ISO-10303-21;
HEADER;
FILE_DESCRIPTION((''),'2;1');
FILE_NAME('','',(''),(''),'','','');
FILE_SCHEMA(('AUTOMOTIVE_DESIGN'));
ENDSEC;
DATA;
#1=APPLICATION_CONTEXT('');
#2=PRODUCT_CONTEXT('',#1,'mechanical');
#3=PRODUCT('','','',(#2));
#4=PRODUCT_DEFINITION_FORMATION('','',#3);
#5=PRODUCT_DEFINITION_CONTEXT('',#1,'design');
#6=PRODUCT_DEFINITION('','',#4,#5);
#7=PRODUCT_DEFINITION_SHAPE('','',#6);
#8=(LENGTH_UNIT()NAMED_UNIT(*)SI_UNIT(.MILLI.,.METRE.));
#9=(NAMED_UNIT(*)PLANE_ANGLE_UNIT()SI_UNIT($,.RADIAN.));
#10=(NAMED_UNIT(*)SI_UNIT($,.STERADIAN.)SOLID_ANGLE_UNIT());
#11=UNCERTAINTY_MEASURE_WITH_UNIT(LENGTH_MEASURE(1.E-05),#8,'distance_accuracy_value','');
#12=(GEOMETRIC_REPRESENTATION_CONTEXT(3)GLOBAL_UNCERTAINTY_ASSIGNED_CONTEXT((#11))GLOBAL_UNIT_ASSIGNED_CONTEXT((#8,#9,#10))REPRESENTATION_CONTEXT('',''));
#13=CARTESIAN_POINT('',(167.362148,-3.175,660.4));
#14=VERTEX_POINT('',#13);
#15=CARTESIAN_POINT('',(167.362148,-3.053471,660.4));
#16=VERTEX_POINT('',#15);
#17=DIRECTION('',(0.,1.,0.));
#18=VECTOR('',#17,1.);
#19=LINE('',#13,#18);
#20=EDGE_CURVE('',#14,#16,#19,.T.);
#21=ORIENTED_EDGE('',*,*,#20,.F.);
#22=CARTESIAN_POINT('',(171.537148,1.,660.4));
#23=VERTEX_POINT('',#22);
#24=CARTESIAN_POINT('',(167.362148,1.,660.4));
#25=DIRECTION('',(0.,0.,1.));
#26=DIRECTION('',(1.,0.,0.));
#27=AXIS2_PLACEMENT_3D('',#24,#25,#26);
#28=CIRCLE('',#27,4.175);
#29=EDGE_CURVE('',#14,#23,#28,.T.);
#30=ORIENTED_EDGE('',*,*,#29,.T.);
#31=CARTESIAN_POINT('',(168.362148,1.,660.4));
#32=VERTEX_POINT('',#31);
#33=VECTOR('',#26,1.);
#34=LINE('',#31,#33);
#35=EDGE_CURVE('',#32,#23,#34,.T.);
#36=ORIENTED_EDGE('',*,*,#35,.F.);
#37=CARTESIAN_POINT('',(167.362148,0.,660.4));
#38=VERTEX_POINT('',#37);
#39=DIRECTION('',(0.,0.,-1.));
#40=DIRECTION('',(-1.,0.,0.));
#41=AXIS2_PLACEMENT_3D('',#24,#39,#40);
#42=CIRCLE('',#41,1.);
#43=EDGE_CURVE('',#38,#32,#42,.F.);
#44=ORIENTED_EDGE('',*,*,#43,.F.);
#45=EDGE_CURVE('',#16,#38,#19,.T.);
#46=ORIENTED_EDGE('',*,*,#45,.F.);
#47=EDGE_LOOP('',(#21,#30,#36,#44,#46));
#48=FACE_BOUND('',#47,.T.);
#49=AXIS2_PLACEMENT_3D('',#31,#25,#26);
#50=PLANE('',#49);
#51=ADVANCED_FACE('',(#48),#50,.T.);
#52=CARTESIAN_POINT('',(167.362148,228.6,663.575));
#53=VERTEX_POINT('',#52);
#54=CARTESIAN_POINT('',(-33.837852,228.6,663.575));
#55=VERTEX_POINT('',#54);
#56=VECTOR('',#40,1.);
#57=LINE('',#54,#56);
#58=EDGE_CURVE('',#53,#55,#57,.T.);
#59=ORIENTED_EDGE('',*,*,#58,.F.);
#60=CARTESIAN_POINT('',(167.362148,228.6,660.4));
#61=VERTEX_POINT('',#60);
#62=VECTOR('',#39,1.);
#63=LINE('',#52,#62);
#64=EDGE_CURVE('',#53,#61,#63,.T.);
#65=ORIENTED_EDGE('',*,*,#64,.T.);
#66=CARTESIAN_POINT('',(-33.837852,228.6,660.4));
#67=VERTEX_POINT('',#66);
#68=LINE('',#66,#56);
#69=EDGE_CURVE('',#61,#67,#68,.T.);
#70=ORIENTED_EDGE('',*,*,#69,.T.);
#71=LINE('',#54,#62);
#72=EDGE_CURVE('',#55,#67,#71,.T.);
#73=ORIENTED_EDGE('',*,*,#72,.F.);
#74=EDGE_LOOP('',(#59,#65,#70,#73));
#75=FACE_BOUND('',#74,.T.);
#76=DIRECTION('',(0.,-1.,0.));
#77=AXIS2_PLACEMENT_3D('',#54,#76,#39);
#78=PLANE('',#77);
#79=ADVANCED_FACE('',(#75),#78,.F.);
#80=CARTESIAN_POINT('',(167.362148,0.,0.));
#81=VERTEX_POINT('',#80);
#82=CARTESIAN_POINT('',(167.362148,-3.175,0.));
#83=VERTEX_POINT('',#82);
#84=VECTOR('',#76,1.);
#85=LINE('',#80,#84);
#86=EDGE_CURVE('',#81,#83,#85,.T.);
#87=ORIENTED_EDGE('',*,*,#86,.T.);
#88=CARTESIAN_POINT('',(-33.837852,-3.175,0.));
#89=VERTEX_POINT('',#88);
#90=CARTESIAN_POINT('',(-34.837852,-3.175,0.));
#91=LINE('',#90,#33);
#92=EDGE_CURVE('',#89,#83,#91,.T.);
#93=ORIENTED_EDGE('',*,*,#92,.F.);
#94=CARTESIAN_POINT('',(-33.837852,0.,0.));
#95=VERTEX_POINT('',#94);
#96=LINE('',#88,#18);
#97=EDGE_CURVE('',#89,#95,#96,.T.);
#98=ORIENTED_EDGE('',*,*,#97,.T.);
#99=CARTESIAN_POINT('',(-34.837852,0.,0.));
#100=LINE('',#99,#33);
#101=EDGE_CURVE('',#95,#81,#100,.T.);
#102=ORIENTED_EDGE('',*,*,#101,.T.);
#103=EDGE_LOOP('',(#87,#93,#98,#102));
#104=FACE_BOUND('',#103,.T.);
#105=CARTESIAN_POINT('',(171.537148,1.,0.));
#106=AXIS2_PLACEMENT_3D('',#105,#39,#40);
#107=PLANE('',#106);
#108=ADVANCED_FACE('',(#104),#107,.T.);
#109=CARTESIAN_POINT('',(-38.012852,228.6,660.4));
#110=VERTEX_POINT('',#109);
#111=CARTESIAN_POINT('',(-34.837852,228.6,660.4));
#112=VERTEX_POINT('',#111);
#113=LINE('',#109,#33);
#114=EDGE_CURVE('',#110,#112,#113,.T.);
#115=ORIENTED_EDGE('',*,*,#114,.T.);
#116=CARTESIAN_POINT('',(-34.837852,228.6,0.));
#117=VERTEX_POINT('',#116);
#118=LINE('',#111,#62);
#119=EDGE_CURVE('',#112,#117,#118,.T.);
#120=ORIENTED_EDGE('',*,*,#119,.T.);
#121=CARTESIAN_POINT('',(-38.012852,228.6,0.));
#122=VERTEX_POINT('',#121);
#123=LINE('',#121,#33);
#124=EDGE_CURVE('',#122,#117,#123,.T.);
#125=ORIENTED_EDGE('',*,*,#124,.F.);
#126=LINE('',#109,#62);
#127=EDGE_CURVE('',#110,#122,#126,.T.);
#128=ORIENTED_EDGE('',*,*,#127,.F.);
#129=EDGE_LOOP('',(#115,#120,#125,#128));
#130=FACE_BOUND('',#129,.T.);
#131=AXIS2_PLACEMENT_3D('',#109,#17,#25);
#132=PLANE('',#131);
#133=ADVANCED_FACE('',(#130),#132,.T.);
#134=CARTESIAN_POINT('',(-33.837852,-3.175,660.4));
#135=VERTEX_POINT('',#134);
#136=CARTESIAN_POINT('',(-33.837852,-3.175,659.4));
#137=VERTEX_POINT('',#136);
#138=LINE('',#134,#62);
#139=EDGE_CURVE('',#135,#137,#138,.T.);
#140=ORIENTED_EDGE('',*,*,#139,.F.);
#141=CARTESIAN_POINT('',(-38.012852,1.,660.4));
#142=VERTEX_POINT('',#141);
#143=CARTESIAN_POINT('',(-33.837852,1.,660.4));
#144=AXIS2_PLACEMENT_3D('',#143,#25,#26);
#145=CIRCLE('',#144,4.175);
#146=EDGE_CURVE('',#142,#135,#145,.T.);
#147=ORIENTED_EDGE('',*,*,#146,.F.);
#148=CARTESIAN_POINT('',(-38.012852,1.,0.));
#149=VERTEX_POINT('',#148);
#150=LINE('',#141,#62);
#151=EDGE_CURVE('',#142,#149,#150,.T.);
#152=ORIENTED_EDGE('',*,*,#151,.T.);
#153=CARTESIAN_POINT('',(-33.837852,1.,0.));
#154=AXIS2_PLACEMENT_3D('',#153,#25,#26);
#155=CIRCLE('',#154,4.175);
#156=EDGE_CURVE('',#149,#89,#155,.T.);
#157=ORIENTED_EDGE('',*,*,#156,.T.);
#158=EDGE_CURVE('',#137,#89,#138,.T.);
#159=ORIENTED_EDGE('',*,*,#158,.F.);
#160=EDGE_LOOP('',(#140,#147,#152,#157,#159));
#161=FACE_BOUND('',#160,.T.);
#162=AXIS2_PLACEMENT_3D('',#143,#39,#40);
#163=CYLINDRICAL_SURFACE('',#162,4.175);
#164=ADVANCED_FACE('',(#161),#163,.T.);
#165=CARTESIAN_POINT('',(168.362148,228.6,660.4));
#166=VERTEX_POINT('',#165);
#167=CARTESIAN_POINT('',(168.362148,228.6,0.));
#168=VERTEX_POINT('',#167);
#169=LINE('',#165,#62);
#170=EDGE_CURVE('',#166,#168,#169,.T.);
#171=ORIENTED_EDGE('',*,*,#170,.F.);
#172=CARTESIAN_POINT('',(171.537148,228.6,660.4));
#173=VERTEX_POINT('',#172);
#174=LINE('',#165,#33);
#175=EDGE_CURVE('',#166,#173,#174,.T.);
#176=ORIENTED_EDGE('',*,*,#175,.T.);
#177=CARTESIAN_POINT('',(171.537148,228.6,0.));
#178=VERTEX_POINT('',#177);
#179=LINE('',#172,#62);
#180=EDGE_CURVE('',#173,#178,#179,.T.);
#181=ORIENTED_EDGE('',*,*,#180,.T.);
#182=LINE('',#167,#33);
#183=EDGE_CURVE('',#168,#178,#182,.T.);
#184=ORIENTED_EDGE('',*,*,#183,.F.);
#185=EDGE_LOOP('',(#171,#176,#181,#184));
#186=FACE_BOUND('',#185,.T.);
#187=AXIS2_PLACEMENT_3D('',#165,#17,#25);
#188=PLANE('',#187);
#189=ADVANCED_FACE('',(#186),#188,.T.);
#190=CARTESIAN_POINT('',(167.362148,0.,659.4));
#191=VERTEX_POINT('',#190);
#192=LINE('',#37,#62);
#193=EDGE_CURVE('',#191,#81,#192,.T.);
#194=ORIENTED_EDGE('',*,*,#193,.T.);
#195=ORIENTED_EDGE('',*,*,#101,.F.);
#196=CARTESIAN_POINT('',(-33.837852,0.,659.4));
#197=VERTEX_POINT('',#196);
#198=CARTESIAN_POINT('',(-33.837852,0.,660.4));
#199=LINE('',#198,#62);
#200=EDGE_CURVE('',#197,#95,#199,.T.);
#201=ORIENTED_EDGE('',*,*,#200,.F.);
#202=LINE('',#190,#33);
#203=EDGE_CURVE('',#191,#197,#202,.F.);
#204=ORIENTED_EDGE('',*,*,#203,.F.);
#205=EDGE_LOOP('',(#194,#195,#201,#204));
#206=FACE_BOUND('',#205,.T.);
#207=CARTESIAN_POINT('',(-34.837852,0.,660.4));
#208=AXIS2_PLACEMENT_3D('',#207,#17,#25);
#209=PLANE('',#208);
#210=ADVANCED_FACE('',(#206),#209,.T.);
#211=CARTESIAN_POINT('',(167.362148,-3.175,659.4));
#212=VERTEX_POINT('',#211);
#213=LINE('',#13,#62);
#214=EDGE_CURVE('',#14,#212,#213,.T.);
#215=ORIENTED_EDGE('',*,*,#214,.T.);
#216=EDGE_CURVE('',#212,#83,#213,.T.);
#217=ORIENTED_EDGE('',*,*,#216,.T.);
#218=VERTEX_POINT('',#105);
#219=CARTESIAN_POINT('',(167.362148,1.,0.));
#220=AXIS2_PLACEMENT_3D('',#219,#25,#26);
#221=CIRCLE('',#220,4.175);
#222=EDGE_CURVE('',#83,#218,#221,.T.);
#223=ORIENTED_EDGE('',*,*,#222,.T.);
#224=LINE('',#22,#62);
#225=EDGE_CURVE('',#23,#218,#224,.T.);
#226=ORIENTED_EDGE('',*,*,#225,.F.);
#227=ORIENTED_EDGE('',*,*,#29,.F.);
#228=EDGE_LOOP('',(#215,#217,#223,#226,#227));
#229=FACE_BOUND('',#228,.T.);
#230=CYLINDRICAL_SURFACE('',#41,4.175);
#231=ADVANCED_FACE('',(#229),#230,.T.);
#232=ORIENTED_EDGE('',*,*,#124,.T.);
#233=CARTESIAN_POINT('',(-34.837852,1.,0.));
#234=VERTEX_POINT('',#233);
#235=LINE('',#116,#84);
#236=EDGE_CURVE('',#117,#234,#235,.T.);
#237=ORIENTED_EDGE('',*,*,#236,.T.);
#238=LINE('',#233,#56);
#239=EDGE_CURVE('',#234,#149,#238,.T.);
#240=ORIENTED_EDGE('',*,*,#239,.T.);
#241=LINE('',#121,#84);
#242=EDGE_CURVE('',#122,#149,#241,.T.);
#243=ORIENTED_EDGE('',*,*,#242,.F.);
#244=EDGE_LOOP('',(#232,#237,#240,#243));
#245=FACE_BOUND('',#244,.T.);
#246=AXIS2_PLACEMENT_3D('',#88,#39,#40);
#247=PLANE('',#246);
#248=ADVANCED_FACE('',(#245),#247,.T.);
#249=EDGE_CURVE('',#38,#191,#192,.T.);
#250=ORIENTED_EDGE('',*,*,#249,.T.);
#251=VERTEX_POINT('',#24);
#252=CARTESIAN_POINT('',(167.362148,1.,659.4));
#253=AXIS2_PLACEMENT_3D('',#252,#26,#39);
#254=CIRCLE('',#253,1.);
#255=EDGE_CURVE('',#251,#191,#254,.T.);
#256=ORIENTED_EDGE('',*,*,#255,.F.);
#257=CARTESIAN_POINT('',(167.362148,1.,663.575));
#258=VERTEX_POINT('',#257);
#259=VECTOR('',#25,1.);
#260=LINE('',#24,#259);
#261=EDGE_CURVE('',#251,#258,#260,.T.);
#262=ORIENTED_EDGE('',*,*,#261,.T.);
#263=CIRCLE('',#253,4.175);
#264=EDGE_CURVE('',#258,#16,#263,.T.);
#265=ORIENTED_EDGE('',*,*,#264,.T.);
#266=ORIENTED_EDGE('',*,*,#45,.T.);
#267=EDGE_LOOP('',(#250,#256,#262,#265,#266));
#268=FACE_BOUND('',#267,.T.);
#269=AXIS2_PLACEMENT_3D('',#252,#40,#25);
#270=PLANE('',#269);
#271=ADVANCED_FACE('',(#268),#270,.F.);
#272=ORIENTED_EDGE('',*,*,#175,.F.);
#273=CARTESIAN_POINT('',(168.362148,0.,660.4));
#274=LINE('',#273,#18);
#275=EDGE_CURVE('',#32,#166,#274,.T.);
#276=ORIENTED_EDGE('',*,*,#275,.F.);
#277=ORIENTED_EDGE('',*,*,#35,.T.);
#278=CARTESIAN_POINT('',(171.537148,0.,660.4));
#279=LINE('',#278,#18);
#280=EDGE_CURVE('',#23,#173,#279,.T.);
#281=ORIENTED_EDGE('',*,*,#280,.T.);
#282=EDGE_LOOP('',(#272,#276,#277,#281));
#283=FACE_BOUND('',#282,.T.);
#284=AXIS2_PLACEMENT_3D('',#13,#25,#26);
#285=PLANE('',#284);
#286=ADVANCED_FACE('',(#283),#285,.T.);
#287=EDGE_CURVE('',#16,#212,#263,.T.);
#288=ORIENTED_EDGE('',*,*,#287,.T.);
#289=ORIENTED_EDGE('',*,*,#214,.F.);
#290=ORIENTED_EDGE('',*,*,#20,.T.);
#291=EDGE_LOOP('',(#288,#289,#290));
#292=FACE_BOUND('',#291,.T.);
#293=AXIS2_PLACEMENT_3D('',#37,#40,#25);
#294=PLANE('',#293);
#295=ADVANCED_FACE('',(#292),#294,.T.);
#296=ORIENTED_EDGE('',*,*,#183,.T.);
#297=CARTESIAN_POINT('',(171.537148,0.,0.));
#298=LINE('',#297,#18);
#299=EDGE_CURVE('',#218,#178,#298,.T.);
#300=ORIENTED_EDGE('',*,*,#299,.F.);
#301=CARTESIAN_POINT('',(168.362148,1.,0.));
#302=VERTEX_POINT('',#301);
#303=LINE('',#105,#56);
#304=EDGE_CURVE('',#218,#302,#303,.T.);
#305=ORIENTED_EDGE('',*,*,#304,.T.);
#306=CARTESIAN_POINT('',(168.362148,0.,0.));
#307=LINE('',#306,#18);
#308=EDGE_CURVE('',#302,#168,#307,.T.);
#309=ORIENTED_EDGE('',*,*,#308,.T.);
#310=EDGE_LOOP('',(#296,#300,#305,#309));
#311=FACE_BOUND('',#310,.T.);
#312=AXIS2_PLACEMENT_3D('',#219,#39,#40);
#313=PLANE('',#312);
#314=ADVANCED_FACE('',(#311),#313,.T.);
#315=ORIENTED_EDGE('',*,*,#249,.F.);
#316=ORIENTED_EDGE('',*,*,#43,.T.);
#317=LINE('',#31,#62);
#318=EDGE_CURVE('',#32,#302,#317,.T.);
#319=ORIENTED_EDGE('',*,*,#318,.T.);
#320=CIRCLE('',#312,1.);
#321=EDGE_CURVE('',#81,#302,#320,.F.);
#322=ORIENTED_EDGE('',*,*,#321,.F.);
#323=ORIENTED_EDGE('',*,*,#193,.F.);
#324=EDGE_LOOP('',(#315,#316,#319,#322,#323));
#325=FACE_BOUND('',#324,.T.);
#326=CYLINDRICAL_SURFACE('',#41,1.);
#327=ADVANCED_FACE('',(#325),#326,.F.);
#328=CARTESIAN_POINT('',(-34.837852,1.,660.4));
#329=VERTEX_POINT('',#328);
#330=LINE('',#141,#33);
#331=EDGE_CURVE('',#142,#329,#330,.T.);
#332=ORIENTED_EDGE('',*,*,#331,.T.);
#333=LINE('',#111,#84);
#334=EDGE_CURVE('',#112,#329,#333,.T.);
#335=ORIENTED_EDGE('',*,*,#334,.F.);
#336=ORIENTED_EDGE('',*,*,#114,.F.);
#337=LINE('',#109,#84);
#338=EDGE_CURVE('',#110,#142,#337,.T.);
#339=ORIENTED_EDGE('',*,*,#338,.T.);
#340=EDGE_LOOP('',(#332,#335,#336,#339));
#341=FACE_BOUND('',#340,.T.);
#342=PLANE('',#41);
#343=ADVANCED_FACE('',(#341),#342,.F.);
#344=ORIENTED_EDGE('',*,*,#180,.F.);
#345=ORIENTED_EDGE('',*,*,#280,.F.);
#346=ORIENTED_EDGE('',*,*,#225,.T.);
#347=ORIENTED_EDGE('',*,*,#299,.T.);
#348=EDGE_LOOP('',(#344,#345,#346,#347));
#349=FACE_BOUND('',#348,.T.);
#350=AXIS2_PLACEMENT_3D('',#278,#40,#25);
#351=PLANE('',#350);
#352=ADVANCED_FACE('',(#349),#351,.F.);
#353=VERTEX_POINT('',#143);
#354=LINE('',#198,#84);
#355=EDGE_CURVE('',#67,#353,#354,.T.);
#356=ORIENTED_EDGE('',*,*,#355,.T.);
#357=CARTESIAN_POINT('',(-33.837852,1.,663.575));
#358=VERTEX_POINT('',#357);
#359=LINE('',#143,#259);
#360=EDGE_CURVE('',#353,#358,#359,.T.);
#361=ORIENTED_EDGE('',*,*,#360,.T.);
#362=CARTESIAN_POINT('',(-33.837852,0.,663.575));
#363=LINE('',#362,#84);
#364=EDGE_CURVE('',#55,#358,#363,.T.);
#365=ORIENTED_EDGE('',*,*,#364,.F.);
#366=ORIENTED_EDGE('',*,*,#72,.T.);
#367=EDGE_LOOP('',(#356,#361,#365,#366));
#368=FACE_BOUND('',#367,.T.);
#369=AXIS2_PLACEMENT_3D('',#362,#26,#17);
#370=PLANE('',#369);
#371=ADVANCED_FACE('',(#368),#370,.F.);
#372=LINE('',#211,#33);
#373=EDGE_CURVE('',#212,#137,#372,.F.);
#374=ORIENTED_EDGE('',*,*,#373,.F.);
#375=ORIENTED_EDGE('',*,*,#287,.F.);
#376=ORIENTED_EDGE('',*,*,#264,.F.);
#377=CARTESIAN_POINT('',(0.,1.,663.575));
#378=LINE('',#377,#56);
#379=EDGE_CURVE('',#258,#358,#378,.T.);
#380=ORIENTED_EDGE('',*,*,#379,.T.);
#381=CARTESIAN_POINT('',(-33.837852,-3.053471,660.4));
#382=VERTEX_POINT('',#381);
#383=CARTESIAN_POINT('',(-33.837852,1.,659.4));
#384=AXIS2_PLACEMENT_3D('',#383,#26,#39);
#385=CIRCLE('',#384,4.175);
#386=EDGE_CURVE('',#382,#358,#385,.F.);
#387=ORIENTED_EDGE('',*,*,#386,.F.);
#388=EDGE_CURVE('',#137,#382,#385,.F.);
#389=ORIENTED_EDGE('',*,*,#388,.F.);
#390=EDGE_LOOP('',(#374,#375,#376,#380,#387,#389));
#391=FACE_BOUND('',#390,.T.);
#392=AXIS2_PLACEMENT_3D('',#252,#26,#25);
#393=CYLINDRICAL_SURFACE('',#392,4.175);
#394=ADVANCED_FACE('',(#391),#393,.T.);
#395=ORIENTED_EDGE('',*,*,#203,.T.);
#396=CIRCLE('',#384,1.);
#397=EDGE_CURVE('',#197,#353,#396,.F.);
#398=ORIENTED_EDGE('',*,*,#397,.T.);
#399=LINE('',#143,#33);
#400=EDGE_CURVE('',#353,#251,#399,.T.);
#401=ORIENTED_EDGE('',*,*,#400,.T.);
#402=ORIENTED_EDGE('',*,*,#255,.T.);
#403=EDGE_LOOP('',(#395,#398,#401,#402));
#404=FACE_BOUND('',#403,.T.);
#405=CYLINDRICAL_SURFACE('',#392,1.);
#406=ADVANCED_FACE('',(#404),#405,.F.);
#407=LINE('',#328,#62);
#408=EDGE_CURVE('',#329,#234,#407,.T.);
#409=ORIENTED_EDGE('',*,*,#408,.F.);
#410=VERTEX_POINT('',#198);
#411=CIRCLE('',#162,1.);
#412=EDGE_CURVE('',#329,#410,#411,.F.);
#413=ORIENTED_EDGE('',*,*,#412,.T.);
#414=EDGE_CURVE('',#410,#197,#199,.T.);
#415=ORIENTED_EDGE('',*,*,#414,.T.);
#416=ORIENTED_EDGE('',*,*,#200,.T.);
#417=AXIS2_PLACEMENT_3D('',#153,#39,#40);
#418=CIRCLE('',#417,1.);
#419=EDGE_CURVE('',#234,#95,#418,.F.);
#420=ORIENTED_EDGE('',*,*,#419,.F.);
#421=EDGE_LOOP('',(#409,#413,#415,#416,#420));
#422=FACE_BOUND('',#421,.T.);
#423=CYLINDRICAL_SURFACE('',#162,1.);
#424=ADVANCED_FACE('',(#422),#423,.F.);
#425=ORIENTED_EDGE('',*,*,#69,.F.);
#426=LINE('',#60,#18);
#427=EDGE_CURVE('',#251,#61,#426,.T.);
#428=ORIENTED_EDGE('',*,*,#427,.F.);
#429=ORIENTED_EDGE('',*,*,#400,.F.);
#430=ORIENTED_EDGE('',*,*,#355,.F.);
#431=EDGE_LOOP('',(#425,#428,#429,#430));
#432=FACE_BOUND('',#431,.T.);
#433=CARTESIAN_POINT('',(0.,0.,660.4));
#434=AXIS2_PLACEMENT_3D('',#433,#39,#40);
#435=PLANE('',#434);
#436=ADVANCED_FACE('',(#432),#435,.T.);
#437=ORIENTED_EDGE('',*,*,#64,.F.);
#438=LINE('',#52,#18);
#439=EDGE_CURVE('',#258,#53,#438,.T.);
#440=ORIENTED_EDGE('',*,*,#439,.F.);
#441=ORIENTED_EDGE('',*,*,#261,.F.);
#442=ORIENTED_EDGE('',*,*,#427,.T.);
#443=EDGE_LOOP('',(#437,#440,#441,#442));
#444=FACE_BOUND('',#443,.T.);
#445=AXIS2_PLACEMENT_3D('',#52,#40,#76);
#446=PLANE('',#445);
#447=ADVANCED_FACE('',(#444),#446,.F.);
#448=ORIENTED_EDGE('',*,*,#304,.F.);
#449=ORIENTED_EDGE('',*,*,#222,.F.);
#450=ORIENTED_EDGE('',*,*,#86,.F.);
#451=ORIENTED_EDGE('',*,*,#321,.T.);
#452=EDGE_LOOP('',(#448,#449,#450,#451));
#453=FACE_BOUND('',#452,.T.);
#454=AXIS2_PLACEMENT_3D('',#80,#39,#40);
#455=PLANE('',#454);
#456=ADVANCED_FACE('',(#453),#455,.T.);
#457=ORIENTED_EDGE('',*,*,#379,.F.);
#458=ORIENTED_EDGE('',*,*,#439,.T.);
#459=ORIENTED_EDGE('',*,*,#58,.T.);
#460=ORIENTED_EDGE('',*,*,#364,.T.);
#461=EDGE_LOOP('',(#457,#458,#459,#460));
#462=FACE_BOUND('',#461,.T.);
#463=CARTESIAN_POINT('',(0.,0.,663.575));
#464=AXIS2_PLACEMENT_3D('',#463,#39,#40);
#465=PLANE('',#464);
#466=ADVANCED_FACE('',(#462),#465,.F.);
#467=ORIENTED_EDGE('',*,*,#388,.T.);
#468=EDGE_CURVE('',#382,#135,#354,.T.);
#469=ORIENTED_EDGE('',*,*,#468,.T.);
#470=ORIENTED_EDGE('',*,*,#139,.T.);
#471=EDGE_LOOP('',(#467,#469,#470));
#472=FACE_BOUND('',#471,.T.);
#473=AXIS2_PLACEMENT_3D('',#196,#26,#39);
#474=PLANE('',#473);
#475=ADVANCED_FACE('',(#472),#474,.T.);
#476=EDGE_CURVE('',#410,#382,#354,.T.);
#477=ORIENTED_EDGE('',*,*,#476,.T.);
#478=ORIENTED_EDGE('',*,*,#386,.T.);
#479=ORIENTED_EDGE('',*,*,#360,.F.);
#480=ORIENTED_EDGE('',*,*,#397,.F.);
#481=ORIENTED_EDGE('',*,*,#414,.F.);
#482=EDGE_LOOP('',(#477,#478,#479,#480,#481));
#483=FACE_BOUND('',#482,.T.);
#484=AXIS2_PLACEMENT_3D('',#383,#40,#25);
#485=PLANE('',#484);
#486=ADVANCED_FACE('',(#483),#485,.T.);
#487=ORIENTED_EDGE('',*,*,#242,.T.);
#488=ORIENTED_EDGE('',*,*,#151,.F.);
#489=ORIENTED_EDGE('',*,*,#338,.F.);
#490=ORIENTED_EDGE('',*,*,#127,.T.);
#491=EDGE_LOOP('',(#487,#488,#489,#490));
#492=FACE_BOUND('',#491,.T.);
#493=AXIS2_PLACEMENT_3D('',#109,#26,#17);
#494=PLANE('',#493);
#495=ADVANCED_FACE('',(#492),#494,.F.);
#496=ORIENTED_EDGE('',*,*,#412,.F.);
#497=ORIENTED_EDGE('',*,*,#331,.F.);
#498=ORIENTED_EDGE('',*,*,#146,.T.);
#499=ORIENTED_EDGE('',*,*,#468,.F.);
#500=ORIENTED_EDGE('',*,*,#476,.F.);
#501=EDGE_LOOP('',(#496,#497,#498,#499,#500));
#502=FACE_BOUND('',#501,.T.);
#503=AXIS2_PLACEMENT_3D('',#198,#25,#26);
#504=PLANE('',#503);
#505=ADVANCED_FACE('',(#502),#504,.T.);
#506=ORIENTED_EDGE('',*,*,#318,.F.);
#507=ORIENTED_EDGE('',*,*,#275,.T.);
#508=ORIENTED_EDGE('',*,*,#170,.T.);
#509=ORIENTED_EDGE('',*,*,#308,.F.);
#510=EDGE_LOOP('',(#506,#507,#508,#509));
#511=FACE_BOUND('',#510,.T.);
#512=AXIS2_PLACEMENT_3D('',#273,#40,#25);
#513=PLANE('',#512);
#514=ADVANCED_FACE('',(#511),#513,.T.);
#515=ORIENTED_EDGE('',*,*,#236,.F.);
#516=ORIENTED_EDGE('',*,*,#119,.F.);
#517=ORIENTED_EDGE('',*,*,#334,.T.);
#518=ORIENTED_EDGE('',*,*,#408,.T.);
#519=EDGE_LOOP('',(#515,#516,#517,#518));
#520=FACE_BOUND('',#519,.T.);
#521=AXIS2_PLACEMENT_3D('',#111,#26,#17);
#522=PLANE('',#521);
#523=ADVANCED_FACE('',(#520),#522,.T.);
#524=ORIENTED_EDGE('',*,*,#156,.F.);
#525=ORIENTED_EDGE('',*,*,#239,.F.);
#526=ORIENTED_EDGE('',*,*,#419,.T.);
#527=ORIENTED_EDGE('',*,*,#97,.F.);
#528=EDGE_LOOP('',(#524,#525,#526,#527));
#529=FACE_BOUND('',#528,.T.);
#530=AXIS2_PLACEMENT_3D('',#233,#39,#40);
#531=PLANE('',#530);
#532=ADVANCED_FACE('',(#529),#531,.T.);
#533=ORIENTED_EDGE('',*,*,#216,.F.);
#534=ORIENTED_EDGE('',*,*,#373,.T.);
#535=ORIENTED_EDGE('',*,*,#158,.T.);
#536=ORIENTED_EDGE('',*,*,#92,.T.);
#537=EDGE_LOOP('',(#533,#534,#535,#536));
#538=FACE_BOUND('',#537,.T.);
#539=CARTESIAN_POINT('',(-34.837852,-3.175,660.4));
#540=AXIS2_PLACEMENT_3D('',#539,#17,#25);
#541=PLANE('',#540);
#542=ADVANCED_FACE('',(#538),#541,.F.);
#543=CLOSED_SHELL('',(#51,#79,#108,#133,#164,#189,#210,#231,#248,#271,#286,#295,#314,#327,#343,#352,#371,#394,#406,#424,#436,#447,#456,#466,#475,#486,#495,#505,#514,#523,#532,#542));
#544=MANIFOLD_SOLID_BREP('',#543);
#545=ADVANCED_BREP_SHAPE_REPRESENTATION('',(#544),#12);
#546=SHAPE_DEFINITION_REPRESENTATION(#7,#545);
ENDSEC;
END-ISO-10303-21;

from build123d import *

# Parameters (mm, degrees)
BASE_FLANGE1_DEPTH           = 660.4
EDGE_FLANGE1_STRIP_W         = 14.7
EDGE_FLANGE1_STRIP_H         = 3.175
EDGE_FLANGE1_STRIP_CUT_DEPTH = 201.2
EDGE_FLANGE1_DEPTH           = 201.2


# Sheet-metal steps are written as plain solids
with BuildPart() as part:
    # Sketch1 → Base-Flange1 (new body)
    with BuildSketch(Plane.XY):
        with BuildLine():
            Line((-34.837852286, 228.6), (-34.837852286, 1))
            ThreePointArc((-34.837852286, 1), (-34.544959068, 0.292893219), (-33.837852286, 0))
            Line((-33.837852286, 0), (167.362147714, 0))
            ThreePointArc((167.362147714, 0), (168.069254495, 0.292893219), (168.362147714, 1))
            Line((168.362147714, 1), (168.362147714, 228.6))
            Line((168.362147714, 228.6), (171.537147714, 228.6))
            Line((171.537147714, 228.6), (171.537147714, 1))
            ThreePointArc((171.537147714, 1), (170.314318525, -1.952170811), (167.362147714, -3.175))
            Line((167.362147714, -3.175), (-33.837852286, -3.175))
            ThreePointArc((-33.837852286, -3.175), (-36.790023098, -1.952170811), (-38.012852286, 1))
            Line((-38.012852286, 1), (-38.012852286, 228.6))
            Line((-38.012852286, 228.6), (-34.837852286, 228.6))
        make_face()
    extrude(amount=BASE_FLANGE1_DEPTH)

    # Edge-Flange1 strip (across the edge) → Edge-Flange1 strip cut (cut)
    with BuildSketch(Plane(origin=(-33.837852286, 0, 660.4), x_dir=(0, 0, -1), z_dir=(1, 0, 0))):
        with Locations((-6.35, -1.5875)):
            Rectangle(EDGE_FLANGE1_STRIP_W, EDGE_FLANGE1_STRIP_H)
    extrude(amount=EDGE_FLANGE1_STRIP_CUT_DEPTH, mode=Mode.SUBTRACT)

    # Edge-Flange1 section (across the edge) → Edge-Flange1 (add)
    with BuildSketch(Plane(origin=(-33.837852286, 0, 660.4), x_dir=(0, 0, -1), z_dir=(1, 0, 0))):
        with BuildLine():
            Line((-3.175, 1), (-3.175, 228.6))
            Line((-3.175, 228.6), (0, 228.6))
            Line((0, 228.6), (0, 1))
            ThreePointArc((0, 1), (0.292893219, 0.292893219), (1, 0))
            Line((1, 0), (1, -3.175))
            ThreePointArc((1, -3.175), (-1.952170811, -1.952170811), (-3.175, 1))
        make_face()
    extrude(amount=EDGE_FLANGE1_DEPTH)


solid = part.part
